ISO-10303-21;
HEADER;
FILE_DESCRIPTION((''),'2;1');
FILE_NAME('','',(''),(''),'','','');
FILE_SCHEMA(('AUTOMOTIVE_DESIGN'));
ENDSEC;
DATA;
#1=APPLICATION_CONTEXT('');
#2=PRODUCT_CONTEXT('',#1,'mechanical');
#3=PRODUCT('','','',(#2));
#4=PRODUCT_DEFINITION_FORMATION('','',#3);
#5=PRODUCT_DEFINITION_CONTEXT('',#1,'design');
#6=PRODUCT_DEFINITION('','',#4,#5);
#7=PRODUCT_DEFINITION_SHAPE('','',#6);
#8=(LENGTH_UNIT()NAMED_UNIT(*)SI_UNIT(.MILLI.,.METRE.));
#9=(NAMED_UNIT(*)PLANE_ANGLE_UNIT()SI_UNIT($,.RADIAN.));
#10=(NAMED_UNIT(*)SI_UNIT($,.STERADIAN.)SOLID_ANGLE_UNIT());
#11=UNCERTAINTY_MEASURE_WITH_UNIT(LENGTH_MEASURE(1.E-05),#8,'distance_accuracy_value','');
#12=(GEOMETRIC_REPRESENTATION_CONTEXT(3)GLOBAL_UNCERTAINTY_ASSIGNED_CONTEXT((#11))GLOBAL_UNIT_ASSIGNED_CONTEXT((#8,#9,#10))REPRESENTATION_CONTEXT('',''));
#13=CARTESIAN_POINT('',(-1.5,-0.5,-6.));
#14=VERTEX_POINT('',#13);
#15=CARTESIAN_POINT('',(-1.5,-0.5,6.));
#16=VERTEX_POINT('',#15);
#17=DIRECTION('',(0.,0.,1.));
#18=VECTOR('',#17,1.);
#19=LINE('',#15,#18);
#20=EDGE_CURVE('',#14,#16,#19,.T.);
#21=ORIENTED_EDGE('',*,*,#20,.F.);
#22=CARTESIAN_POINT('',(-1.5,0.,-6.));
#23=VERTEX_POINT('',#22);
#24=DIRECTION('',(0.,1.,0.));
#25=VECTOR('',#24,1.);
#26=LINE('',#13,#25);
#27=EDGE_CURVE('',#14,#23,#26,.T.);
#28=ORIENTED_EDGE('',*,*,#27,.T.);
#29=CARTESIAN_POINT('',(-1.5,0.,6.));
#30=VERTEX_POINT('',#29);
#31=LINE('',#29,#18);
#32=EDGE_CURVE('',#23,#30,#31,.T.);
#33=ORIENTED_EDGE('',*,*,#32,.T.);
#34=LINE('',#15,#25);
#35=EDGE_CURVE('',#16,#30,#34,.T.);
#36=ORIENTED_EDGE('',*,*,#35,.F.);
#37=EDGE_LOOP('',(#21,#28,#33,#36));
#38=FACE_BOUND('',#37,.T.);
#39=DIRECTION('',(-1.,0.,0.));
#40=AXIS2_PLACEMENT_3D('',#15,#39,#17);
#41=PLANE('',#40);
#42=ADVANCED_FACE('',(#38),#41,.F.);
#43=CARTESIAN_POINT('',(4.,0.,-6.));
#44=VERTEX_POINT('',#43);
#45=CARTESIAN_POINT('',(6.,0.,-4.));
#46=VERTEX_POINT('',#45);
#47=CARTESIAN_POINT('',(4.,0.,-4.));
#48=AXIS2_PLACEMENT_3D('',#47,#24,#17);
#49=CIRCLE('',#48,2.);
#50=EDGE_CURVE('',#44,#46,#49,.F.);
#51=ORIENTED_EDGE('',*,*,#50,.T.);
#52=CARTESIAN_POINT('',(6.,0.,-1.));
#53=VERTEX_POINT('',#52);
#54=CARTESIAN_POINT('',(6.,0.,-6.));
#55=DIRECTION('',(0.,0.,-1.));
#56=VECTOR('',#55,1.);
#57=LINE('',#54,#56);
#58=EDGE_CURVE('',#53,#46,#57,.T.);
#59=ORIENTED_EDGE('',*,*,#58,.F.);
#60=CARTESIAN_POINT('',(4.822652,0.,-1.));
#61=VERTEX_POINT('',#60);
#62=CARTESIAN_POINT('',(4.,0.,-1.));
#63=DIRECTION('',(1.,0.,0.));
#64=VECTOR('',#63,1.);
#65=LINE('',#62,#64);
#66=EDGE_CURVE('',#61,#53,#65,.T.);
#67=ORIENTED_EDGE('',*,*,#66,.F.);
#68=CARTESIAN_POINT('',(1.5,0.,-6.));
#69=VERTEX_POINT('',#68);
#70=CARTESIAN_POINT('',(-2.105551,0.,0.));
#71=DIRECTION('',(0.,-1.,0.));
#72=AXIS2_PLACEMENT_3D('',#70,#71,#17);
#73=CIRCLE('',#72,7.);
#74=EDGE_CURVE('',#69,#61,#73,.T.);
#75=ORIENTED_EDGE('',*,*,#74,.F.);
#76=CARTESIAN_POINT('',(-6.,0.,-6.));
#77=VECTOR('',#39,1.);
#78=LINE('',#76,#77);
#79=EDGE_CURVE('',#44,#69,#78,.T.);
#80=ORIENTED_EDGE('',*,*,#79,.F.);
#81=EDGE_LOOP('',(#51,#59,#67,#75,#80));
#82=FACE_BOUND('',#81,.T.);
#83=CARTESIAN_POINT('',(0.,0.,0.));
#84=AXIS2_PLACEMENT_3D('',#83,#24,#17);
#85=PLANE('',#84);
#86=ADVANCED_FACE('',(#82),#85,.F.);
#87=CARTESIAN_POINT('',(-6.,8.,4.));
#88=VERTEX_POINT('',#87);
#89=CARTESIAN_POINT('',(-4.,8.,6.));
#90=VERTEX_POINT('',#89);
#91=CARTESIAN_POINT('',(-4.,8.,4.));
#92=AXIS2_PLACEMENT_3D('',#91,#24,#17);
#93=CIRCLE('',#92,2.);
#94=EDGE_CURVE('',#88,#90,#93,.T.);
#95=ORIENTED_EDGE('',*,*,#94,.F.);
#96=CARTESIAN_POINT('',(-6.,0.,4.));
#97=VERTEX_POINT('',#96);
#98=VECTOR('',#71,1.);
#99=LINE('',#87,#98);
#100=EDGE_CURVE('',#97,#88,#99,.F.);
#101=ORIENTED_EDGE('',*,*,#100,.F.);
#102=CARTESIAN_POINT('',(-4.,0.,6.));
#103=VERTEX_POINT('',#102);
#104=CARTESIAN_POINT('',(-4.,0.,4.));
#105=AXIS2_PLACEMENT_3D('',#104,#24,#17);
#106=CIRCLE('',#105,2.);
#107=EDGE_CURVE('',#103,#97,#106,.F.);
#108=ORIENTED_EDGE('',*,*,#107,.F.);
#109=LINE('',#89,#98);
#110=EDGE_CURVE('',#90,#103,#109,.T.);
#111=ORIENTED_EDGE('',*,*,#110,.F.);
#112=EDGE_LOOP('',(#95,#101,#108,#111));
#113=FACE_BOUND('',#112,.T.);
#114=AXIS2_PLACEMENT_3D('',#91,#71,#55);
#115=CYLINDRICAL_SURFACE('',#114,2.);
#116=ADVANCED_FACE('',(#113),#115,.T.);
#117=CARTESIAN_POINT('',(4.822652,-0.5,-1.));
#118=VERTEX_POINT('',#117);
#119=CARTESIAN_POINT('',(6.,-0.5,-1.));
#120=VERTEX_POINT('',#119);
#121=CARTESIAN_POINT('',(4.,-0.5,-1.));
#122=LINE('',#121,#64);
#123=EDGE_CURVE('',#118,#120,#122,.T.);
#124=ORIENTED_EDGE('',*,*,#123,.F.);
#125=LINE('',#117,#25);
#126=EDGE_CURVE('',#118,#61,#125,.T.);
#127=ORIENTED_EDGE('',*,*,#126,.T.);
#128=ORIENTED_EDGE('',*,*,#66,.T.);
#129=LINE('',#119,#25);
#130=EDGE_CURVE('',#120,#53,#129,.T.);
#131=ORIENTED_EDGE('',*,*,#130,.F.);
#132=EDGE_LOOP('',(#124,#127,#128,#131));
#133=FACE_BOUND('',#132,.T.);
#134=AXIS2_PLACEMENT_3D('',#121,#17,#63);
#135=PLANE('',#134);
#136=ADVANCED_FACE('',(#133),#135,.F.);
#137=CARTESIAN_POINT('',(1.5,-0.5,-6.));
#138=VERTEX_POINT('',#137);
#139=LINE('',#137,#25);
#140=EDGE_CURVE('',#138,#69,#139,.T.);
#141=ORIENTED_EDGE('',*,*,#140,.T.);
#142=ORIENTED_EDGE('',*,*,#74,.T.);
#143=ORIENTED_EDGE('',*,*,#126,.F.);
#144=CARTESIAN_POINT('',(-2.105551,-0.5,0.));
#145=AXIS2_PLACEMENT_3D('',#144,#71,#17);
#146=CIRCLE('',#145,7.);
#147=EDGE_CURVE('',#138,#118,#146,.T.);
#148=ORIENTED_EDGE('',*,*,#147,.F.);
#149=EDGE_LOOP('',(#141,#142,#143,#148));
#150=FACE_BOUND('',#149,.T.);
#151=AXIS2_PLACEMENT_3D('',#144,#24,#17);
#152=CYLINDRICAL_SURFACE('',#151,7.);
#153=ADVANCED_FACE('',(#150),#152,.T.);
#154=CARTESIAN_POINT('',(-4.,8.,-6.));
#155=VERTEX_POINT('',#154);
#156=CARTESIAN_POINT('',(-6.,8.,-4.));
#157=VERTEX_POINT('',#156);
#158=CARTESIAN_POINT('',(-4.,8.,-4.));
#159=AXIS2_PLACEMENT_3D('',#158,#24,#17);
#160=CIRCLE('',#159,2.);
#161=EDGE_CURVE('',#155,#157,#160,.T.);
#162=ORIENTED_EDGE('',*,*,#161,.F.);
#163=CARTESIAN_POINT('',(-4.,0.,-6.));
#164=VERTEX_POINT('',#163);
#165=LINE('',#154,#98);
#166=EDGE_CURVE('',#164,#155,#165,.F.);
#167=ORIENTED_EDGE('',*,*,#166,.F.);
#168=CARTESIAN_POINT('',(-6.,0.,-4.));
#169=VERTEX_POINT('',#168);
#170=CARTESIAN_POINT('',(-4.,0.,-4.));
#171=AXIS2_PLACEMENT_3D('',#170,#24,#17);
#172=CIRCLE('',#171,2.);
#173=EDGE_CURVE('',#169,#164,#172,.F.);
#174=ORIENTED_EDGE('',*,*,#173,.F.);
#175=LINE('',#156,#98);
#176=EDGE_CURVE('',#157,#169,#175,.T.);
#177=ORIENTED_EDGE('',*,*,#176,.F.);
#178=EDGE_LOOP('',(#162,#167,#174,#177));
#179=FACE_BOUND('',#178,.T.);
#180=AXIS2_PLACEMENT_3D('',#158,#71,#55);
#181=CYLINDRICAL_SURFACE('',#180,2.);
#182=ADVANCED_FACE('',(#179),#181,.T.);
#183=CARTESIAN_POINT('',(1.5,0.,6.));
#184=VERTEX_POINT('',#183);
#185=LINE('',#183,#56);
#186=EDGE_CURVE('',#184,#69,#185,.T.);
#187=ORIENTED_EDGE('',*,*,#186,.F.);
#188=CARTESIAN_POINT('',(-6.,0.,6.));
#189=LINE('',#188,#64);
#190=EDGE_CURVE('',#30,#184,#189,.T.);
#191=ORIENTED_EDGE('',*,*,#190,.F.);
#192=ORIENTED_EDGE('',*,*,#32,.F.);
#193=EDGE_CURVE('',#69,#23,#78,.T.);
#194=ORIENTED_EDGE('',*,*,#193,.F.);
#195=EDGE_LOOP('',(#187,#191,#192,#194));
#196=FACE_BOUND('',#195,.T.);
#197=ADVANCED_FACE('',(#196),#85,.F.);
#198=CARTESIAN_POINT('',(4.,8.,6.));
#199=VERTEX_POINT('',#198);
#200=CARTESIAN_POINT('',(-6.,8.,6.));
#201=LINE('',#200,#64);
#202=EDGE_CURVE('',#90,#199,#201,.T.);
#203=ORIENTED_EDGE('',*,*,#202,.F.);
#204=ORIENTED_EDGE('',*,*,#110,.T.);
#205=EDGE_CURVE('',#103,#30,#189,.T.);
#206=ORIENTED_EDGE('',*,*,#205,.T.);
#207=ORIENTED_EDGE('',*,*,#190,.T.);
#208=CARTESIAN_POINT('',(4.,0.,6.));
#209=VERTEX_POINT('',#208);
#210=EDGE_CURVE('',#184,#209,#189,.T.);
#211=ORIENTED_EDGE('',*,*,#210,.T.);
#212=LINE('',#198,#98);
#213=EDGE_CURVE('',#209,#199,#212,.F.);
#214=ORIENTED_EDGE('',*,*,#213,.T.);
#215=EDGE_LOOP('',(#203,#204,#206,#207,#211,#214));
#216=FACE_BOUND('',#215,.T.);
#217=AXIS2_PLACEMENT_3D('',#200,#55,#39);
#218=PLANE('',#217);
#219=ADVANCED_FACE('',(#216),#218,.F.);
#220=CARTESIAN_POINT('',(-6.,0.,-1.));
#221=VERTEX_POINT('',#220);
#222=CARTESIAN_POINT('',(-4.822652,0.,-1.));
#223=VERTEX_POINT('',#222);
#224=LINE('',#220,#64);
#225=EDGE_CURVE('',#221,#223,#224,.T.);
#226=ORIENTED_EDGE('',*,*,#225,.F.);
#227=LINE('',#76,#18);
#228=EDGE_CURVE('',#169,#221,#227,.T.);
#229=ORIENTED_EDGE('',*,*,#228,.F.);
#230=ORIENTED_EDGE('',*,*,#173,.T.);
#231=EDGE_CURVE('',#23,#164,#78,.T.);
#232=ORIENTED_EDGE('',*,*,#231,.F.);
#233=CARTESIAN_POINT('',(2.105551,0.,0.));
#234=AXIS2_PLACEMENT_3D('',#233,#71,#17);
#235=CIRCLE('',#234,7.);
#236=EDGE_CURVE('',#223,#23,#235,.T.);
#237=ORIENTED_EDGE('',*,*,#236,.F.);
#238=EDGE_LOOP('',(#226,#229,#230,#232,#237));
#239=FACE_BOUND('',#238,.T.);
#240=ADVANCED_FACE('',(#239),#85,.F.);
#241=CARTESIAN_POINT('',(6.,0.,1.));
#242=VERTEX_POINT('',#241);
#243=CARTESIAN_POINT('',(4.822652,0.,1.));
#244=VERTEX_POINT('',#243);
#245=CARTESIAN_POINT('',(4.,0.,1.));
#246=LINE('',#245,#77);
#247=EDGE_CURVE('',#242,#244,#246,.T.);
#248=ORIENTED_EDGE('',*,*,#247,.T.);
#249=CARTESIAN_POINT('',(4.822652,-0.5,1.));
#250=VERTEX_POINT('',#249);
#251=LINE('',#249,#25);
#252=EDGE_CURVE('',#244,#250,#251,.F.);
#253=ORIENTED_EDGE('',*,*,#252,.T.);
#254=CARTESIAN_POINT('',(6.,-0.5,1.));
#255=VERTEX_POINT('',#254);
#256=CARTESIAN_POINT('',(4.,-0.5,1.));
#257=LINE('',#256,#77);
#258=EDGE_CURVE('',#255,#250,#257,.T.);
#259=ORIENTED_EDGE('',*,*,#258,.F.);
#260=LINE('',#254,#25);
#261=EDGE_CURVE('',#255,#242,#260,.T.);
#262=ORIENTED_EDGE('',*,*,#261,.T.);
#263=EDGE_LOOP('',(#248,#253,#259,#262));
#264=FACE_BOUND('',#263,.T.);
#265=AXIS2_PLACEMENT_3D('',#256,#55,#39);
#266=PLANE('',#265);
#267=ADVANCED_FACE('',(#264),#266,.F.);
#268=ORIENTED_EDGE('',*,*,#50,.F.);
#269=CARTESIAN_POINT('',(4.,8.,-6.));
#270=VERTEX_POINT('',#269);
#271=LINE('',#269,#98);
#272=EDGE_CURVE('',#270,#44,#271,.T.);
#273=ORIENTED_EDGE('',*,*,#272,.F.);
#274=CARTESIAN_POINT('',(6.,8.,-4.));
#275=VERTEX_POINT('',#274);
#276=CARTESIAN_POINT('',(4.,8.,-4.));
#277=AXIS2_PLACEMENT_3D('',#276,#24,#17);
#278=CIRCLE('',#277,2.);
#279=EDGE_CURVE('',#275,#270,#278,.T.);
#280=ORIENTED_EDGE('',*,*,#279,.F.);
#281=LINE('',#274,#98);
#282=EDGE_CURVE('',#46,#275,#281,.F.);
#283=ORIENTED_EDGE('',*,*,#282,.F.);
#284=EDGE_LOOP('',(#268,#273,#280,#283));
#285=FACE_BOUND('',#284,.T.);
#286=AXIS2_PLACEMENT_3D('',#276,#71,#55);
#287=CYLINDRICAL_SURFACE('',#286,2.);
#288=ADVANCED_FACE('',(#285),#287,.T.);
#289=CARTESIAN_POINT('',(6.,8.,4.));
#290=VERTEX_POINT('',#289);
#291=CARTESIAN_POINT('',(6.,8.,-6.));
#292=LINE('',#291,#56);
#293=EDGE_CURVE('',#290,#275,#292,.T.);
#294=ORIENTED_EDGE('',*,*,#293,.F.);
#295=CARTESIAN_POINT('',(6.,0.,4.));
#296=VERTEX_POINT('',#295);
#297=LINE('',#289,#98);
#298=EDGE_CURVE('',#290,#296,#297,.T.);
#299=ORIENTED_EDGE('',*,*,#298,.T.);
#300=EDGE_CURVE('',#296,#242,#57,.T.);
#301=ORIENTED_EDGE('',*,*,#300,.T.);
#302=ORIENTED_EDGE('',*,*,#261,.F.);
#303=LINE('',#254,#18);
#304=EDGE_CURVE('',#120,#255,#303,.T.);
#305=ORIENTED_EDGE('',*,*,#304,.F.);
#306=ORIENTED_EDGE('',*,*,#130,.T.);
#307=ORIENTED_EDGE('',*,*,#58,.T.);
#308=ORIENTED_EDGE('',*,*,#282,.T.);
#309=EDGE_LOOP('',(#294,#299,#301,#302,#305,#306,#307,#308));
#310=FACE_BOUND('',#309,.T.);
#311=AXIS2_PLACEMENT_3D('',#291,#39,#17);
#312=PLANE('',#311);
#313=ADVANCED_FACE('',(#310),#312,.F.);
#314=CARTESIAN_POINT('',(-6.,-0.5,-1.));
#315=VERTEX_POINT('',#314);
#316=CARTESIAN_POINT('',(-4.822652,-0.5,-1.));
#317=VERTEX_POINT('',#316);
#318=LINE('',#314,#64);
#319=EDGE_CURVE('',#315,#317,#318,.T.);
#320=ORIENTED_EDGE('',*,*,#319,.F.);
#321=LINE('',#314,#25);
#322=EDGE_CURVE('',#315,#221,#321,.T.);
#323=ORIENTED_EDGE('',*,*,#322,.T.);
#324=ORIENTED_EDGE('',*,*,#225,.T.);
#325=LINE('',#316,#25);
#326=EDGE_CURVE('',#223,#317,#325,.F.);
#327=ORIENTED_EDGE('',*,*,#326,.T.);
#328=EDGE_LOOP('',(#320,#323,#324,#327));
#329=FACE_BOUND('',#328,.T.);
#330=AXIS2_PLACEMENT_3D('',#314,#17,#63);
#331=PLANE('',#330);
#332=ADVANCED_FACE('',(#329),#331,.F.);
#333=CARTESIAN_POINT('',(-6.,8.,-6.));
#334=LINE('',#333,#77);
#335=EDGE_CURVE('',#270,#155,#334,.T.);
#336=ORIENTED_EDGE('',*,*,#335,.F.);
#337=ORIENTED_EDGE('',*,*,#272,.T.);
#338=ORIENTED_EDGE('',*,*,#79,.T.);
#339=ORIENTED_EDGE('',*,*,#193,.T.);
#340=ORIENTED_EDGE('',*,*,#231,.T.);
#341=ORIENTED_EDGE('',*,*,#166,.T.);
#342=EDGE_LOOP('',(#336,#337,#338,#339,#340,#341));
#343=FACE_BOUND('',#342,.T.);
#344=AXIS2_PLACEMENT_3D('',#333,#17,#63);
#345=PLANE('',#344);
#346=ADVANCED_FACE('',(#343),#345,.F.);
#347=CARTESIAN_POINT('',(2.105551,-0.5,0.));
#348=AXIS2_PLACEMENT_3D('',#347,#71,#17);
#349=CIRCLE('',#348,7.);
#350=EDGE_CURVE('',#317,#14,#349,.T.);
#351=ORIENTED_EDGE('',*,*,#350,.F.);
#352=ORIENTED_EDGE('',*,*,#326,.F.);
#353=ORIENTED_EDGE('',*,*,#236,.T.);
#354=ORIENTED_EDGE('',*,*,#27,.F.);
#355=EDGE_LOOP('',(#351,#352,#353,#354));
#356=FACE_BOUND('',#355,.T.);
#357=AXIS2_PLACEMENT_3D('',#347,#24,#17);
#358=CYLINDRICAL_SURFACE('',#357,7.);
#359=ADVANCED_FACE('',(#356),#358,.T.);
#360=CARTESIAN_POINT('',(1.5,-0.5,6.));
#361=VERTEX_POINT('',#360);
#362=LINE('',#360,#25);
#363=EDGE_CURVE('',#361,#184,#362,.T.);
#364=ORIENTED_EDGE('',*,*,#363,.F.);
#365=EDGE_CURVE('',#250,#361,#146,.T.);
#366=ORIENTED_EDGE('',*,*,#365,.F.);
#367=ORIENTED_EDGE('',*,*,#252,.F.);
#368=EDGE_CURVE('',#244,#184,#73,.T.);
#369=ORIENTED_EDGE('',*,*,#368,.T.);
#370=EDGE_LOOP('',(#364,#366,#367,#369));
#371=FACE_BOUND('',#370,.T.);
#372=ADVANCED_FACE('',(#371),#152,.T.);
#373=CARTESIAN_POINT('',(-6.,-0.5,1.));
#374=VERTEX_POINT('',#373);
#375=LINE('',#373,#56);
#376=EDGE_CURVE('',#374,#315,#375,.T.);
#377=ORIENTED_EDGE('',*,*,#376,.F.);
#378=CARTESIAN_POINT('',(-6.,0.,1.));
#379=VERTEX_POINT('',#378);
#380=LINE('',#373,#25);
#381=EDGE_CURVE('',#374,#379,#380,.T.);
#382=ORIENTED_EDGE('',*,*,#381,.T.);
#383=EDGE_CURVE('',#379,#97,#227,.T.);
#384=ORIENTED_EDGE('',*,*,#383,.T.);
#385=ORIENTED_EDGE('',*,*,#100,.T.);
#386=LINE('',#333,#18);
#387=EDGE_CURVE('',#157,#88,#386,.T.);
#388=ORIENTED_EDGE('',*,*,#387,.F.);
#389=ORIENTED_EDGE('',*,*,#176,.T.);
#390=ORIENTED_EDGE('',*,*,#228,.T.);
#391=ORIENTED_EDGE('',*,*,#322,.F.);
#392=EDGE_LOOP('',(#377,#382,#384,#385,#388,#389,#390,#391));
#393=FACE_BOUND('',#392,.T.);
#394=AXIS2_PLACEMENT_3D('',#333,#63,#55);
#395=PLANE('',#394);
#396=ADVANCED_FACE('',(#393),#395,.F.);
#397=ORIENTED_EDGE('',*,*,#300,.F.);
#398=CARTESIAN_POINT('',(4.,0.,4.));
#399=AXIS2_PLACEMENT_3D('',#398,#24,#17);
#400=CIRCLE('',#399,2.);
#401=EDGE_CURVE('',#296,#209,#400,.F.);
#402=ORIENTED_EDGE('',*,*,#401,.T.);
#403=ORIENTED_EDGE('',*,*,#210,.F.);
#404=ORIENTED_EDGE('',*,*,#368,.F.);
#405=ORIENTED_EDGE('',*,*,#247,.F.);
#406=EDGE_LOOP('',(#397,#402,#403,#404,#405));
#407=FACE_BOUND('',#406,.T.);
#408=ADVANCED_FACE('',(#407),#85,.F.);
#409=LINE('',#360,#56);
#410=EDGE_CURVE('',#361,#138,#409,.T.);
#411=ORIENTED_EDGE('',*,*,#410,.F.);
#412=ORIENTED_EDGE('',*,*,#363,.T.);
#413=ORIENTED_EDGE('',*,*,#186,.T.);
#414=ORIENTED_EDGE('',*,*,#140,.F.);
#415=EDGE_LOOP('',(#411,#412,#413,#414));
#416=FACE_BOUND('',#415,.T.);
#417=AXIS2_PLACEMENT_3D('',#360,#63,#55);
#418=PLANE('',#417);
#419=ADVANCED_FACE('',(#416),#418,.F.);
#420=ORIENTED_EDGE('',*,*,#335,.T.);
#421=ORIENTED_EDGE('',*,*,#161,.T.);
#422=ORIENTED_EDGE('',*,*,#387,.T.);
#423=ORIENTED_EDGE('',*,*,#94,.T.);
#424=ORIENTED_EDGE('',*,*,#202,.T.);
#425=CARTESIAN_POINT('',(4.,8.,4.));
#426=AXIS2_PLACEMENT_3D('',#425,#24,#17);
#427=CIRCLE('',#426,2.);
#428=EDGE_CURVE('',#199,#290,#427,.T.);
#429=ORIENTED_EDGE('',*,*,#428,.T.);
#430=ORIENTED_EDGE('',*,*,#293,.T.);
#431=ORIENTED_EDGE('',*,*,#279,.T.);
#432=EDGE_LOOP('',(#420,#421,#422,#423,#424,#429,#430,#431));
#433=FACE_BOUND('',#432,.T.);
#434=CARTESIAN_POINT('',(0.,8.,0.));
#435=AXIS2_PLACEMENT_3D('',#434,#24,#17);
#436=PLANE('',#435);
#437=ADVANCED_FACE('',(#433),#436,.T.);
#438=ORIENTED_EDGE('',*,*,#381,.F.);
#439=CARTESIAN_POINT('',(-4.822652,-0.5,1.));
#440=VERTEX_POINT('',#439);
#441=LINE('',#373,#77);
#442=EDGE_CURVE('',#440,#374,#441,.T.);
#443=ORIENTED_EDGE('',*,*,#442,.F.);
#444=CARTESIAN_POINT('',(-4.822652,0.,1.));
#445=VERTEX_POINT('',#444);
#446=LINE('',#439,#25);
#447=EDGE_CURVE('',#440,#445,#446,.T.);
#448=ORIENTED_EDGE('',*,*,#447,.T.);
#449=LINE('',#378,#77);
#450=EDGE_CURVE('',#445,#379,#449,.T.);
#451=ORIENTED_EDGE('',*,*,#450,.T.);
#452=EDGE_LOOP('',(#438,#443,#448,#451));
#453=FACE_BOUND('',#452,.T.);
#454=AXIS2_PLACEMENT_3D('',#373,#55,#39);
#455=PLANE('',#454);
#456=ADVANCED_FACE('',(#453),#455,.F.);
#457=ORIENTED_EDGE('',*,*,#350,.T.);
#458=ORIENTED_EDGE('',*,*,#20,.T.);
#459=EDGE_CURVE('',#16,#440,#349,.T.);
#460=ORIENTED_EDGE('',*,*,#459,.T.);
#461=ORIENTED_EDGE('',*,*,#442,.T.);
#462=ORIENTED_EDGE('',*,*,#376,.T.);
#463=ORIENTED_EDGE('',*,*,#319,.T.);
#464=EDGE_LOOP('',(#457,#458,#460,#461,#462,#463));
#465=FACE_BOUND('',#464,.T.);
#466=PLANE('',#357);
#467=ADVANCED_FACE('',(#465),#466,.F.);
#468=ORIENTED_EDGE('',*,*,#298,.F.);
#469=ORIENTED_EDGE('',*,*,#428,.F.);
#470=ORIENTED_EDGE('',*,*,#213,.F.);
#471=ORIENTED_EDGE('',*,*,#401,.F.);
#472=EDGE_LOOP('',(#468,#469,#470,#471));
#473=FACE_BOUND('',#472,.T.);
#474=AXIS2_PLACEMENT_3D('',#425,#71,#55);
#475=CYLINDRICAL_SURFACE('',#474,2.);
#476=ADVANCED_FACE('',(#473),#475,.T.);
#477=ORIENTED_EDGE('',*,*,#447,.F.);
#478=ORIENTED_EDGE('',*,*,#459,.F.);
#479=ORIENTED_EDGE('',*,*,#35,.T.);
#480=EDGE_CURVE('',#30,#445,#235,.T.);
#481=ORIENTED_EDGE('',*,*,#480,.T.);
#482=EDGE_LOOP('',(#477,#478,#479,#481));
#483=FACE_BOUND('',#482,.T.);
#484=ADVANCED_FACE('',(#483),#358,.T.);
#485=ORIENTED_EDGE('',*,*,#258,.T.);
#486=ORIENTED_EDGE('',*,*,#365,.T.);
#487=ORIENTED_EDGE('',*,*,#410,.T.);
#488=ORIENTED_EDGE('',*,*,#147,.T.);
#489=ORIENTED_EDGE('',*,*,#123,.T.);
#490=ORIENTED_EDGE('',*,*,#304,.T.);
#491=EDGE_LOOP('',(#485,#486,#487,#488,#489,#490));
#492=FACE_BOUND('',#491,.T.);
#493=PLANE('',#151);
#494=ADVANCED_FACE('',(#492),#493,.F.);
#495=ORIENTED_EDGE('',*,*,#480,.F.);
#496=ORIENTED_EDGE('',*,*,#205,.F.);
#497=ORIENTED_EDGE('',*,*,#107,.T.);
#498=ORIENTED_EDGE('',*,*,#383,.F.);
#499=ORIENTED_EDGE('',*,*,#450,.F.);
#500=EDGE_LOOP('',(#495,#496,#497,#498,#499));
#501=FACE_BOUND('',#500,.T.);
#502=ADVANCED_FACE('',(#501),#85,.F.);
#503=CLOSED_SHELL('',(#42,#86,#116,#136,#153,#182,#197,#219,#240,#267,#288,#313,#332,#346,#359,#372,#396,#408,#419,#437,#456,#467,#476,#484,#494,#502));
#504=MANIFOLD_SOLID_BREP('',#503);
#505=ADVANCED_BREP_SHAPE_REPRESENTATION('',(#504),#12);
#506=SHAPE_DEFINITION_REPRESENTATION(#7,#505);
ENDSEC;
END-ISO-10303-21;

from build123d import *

# Parameters (mm, degrees)
SKETCH_2_W      = 12
SKETCH_2_H      = 12
EXTRUDE_1_DEPTH = 8
FILLET_1_R      = 2
EXTRUDE_START   = -0.5
EXTRUDE_2_DEPTH = 0.5
SKETCH_4_W      = 2
SKETCH_4_H      = 2
EXTRUDE_3_DEPTH = 0.5


# Read off the part's stored shape, not the designer's step: Бобышка-Вытянуть2
with BuildPart() as part:
    # Эскиз2 → Бобышка-Вытянуть1 (new body)
    with BuildSketch(Plane(origin=(0, 0, 0), x_dir=(1, 0, 0), z_dir=(0, 1, 0))):
        Rectangle(SKETCH_2_W, SKETCH_2_H)
    extrude(amount=EXTRUDE_1_DEPTH)

    # Скругление1
    fillet_1_edges = [part.edges().sort_by_distance(p)[0] for p in [
        (-6, 4, -6),
        (6, 4, -6),
        (6, 4, 6),
        (-6, 4, 6),
    ]]
    fillet(fillet_1_edges, radius=FILLET_1_R)

    # Бобышка-Вытянуть2 outline → Бобышка-Вытянуть2 (add)
    with BuildSketch(Plane(origin=(0, 0, 0), x_dir=(1, 0, 0), z_dir=(0, 1, 0)).offset(EXTRUDE_START)):
        with BuildLine():
            Line((-1.5, -6), (-1.5, 6))
            ThreePointArc((-1.5, 6), (-4.894448725, 0), (-1.5, -6))
        make_face()
        with BuildLine():
            Line((1.5, 6), (1.5, -6))
            ThreePointArc((1.5, -6), (4.894448725, 0), (1.5, 6))
        make_face()
    extrude(amount=EXTRUDE_2_DEPTH)

    # Эскиз4 → Бобышка-Вытянуть3 (add)
    with BuildSketch(Plane.XZ):
        with Locations((-5, 0)):
            Rectangle(SKETCH_4_W, SKETCH_4_H)
        with Locations((5, 0)):
            Rectangle(SKETCH_4_W, SKETCH_4_H)
    extrude(amount=EXTRUDE_3_DEPTH)


solid = part.part
